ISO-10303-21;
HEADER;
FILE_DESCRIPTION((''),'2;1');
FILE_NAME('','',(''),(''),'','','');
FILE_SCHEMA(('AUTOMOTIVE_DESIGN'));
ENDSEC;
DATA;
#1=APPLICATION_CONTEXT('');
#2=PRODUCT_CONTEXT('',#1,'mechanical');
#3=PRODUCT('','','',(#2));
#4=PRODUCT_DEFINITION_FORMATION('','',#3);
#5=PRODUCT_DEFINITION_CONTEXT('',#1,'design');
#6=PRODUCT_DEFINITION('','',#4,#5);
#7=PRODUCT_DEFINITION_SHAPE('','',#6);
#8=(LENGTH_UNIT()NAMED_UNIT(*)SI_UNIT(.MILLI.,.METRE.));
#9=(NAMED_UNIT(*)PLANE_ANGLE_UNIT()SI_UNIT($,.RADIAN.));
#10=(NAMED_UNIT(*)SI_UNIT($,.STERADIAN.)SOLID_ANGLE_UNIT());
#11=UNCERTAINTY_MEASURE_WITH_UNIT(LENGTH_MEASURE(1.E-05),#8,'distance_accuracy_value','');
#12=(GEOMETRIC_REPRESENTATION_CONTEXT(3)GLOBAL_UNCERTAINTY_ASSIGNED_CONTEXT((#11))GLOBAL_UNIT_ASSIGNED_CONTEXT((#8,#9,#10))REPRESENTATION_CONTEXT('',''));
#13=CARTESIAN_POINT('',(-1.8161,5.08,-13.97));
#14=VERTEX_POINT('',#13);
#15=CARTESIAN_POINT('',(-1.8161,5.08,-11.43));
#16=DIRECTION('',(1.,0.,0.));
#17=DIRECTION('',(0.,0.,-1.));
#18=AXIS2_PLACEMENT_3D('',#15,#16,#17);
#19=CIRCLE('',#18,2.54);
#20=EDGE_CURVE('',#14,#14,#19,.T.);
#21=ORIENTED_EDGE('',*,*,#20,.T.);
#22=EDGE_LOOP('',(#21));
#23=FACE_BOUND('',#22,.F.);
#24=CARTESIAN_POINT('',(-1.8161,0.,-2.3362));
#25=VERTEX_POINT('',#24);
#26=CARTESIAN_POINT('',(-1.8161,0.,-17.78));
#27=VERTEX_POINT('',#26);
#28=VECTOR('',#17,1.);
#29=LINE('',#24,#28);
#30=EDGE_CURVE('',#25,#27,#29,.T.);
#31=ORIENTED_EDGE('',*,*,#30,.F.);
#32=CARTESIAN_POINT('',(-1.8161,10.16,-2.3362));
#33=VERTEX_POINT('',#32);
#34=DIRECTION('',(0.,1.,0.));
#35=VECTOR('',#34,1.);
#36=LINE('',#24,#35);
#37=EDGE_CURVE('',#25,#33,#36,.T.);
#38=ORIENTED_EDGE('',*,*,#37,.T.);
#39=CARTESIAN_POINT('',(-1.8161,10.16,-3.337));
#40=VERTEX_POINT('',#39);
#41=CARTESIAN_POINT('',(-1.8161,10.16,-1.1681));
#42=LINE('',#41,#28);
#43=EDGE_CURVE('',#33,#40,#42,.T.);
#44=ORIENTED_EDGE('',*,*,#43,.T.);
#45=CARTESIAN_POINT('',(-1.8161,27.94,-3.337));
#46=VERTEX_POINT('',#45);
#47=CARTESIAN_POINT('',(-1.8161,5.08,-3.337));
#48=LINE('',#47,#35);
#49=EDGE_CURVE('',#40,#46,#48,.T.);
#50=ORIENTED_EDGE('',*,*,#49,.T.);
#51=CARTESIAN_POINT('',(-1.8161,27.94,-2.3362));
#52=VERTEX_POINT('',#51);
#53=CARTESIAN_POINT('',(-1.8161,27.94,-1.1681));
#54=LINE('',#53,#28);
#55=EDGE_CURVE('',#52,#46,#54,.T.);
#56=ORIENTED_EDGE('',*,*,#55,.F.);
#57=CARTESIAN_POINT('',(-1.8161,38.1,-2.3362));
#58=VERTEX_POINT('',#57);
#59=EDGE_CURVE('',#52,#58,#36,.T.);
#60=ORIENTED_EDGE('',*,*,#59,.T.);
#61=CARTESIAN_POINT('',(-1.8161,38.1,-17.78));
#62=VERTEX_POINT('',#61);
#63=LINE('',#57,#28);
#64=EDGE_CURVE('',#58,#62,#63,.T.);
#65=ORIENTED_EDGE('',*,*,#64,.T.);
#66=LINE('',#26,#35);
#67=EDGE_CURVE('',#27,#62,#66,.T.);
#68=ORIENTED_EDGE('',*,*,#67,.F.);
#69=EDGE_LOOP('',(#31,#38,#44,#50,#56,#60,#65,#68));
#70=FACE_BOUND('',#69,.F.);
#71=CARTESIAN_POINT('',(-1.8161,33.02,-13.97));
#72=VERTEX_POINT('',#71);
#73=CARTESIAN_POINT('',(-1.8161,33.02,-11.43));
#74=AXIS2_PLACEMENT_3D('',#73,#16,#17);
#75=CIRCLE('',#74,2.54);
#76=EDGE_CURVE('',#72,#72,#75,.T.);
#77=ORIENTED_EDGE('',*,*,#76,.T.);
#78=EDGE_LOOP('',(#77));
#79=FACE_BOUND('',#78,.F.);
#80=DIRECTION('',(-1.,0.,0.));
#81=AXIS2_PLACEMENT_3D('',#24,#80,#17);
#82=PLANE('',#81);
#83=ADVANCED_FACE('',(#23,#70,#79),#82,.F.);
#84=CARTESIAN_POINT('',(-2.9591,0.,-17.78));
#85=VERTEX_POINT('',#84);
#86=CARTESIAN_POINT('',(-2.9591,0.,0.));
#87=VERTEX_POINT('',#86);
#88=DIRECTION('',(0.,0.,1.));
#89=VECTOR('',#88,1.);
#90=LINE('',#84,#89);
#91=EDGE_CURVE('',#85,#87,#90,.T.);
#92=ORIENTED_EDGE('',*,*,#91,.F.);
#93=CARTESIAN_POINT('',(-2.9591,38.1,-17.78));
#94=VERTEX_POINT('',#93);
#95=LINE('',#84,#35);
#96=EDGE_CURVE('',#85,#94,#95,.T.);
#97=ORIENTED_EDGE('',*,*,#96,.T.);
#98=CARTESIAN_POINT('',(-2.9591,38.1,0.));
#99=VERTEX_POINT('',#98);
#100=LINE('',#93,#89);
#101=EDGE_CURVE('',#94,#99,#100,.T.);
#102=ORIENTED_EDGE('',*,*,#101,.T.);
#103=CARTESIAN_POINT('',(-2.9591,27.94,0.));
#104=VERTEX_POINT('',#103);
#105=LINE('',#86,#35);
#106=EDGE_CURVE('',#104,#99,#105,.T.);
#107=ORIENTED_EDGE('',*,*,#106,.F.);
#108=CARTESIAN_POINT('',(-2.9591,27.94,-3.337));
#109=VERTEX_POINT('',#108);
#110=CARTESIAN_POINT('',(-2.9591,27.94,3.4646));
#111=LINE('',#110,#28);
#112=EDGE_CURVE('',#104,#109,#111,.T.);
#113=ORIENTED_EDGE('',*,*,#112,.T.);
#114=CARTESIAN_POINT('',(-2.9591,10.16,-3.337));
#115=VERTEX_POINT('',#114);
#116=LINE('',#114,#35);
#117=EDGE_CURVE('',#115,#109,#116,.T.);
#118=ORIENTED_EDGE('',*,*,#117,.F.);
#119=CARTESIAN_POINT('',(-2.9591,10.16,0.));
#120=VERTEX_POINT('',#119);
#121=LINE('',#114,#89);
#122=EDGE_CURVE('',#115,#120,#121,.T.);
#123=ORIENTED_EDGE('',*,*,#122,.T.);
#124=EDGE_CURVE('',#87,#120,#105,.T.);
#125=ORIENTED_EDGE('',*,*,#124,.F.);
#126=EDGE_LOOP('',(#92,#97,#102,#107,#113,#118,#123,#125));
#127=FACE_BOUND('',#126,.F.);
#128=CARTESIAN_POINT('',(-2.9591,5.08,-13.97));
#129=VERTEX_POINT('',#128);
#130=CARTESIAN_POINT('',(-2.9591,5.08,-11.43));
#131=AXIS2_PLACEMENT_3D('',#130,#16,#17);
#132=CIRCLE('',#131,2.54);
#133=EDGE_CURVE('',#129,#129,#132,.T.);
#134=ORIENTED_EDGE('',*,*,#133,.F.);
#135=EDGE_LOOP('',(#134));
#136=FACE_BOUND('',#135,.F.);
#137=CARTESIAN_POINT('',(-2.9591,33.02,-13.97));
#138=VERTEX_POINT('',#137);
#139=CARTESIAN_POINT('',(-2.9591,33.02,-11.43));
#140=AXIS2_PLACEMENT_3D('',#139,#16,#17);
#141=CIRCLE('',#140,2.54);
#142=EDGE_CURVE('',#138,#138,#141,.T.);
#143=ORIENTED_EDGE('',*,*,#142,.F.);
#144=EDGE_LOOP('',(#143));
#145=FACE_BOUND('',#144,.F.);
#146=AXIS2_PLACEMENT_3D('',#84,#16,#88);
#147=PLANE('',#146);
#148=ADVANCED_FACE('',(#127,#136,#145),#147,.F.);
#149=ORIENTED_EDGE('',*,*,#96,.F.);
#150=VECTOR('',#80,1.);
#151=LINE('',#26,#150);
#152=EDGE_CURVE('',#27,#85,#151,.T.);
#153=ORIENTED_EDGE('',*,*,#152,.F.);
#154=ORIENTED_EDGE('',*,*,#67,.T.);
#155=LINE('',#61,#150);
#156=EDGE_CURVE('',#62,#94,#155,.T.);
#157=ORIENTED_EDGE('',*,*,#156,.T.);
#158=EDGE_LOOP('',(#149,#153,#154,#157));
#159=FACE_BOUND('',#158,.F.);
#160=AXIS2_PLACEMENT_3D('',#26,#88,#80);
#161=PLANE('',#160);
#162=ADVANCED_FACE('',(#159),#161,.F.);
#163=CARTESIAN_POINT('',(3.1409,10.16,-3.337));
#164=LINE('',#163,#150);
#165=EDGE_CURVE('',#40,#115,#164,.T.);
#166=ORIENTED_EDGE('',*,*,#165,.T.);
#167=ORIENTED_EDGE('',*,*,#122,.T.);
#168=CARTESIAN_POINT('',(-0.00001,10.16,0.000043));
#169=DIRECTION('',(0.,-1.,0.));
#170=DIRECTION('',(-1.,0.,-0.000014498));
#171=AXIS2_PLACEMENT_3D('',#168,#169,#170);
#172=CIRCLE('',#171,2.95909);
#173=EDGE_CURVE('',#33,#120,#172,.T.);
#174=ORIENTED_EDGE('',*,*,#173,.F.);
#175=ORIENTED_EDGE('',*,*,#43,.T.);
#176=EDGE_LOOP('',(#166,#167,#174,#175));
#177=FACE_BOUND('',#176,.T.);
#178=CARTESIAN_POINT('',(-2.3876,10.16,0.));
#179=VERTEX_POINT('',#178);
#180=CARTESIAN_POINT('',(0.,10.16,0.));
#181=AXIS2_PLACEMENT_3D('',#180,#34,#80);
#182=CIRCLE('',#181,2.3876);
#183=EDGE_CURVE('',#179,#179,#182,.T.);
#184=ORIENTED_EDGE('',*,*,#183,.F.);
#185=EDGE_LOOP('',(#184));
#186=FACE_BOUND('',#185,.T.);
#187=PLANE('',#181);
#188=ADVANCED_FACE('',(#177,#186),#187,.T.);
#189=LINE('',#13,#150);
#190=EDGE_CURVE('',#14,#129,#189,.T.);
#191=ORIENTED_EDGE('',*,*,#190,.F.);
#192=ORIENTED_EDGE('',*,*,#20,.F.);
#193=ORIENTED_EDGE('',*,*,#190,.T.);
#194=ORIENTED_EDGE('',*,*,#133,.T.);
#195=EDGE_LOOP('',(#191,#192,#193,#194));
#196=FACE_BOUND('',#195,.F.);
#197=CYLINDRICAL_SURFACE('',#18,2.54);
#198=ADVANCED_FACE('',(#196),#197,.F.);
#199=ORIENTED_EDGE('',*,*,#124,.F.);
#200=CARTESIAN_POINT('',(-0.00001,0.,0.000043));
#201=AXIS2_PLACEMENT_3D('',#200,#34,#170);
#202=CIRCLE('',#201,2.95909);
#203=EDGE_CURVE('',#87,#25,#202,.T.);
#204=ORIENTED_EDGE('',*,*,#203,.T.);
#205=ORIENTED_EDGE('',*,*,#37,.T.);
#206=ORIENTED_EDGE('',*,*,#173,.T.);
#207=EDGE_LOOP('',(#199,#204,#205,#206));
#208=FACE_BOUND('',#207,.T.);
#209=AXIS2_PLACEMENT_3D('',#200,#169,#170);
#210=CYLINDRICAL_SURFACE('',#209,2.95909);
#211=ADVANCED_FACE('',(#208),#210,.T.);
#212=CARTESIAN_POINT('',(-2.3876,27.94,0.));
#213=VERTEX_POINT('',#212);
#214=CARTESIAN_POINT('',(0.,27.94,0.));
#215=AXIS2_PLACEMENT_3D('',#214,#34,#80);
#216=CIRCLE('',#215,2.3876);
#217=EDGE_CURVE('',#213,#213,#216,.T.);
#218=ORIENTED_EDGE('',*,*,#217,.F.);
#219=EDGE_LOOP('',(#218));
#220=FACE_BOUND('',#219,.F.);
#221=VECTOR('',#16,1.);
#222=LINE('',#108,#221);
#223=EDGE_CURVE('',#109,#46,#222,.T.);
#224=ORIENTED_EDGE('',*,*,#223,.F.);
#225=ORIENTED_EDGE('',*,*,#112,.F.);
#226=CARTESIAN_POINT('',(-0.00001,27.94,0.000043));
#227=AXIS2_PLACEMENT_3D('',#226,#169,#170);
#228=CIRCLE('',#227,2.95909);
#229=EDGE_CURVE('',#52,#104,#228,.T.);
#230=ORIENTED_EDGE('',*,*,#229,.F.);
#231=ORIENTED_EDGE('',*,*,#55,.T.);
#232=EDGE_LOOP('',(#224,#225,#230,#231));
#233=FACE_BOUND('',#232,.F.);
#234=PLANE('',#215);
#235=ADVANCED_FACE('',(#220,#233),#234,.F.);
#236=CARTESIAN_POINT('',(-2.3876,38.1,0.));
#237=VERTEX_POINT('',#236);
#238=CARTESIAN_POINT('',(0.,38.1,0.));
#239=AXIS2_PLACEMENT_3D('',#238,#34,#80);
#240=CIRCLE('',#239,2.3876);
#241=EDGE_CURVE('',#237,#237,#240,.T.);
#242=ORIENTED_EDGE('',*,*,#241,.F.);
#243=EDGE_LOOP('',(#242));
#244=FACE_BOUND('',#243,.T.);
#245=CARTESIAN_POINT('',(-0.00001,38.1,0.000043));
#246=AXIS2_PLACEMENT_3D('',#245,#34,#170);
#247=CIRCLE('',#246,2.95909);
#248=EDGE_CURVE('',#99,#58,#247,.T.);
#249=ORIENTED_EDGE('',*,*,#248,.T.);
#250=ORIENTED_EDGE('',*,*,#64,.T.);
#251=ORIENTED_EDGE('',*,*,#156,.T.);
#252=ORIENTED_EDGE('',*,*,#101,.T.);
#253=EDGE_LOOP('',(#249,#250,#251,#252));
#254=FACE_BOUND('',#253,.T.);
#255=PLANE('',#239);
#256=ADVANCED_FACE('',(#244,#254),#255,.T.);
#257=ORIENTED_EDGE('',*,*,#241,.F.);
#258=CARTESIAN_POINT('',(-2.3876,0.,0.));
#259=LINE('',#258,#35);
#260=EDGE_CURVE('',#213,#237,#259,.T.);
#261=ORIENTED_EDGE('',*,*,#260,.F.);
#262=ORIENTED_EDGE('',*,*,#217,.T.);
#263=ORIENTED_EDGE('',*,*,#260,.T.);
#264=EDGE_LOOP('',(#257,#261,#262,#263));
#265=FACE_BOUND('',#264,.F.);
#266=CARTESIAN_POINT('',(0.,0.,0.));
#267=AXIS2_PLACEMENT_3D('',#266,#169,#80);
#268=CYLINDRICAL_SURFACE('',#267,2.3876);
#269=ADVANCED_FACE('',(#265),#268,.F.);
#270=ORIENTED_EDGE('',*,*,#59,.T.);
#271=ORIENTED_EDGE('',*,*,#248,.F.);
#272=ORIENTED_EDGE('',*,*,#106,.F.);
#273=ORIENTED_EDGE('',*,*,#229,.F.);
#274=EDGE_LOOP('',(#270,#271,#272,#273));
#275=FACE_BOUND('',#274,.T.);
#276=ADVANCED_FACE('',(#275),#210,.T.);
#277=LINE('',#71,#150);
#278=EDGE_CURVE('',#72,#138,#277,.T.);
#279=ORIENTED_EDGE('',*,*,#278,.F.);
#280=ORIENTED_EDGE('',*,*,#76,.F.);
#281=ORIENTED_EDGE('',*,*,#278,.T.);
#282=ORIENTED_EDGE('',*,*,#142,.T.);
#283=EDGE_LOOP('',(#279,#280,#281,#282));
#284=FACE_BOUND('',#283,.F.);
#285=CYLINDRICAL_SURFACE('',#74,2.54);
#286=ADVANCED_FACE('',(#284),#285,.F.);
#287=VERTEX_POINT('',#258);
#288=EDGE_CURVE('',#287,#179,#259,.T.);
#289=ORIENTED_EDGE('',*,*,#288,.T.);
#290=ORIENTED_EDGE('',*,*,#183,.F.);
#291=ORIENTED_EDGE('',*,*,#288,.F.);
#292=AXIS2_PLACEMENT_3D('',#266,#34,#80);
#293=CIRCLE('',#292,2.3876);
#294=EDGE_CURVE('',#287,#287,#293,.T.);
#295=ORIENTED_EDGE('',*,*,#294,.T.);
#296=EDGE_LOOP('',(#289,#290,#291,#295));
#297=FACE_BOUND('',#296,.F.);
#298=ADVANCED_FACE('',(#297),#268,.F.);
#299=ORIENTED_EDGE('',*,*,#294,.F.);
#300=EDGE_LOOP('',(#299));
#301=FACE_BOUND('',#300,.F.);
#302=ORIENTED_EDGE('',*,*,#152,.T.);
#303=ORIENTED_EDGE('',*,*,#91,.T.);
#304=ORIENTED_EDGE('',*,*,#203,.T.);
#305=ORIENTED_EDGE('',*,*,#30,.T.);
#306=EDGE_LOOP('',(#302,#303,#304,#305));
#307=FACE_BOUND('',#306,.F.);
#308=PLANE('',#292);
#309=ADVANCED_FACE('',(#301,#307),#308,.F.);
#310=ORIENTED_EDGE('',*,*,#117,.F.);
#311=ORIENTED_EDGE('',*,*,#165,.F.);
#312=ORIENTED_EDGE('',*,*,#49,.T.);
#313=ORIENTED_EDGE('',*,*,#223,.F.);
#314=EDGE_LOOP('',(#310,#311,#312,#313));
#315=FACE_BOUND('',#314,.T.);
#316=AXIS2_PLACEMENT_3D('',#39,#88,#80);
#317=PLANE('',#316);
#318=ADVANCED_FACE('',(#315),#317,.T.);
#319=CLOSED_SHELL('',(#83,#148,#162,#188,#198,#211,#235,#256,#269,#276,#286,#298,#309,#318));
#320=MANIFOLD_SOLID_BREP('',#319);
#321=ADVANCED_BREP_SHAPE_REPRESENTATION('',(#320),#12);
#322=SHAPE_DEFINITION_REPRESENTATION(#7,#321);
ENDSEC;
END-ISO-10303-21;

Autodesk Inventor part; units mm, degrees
ref_plane "YZ Plane" through (0, 0, 0) normal (1, 0, 0) x (0, 1, 0)
ref_plane "XY Plane" through (0, 0, 0) normal (0, 0, 1) x (1, 0, 0)
sketch "Sketch1" plane through (0, 0, 0) normal (0, 1, 0) x (-1, 0, 0)
  circle A0 centre (0, 0) radius 2.3876
  arc A1 (2.9591, 0) -> (1.8161, -2.3362) centre (0, 0) ccw
  line L0 (2.9591, 0) -> (2.3876, 0)
  line L1 (1.8161, -2.3362) -> (1.8161, -17.78)
  line L2 (1.8161, -17.78) -> (2.9591, -17.78)
  line L3 (2.9591, -17.78) -> (2.9591, 0)
  dimension "d0" = 4.7752
  dimension "d1" = 5.9182
  dimension "d2" = 17.78
  dimension "d3" = 1.143
extrude "Extrusion1" add sketch "Sketch1" along normal blind 38.1
ref_plane "Work Plane1" through (0, 10.16, 0) normal (0, 1, 0) x (-1, 0, 0)
sketch "Sketch2" plane through (0, 10.16, 0) normal (0, 1, 0) x (-1, 0, 0)
  circle A0 centre (0, 0) radius 2.3876 projected
  arc A1 (2.9591, 0) -> (1.8161, -2.3362) centre (0, 0) ccw projected
  line L0 (1.8161, -2.3362) -> (1.8161, -17.78) projected
  line L1 (1.8161, -17.78) -> (2.9591, -17.78) projected
  line L2 (2.9591, -17.78) -> (2.9591, 0) projected
  line L3 (2.9591, 3.4646) -> (-3.1409, 3.4646)
  line L4 (-3.1409, 3.4646) -> (-3.1409, -3.337)
  line L5 (-3.1409, -3.337) -> (2.9591, -3.337)
  line L6 (2.9591, -3.337) -> (2.9591, 3.4646)
  dimension "d7" = 0
  dimension "d8" = 6.1
  dimension "d9" = 21.2446
  dimension "d10" = 14.443
extrude "Extrusion2" cut sketch "Sketch2" along normal blind 17.78 contours L2 L5 L0 A1 | A1 L0 L5 L4 L3 L6
sketch "Sketch3" plane through (-1.8161, 0, -2.3362) normal (1, 0, 0) x (0, 0, -1)
  circle A0 centre (9.0938, 5.08) radius 2.54
  circle A1 centre (9.0938, 33.02) radius 2.54
  line L0 (15.4438, 0) -> (15.4438, 38.1) projected
  line L1 (0, 0) -> (15.4438, 0) projected
  line L2 (0, 38.1) -> (15.4438, 38.1) projected
  point P0 (-2.3362, 0)
  dimension "d13" = 6.35
  dimension "d14" = 5.08
  dimension "d15" = 5.08
  dimension "d17" = 5.08
extrude "Extrusion3" cut sketch "Sketch3" against normal up to next
equation "\"d17\" = d14"
properties part number "Hinge Wall 1"
